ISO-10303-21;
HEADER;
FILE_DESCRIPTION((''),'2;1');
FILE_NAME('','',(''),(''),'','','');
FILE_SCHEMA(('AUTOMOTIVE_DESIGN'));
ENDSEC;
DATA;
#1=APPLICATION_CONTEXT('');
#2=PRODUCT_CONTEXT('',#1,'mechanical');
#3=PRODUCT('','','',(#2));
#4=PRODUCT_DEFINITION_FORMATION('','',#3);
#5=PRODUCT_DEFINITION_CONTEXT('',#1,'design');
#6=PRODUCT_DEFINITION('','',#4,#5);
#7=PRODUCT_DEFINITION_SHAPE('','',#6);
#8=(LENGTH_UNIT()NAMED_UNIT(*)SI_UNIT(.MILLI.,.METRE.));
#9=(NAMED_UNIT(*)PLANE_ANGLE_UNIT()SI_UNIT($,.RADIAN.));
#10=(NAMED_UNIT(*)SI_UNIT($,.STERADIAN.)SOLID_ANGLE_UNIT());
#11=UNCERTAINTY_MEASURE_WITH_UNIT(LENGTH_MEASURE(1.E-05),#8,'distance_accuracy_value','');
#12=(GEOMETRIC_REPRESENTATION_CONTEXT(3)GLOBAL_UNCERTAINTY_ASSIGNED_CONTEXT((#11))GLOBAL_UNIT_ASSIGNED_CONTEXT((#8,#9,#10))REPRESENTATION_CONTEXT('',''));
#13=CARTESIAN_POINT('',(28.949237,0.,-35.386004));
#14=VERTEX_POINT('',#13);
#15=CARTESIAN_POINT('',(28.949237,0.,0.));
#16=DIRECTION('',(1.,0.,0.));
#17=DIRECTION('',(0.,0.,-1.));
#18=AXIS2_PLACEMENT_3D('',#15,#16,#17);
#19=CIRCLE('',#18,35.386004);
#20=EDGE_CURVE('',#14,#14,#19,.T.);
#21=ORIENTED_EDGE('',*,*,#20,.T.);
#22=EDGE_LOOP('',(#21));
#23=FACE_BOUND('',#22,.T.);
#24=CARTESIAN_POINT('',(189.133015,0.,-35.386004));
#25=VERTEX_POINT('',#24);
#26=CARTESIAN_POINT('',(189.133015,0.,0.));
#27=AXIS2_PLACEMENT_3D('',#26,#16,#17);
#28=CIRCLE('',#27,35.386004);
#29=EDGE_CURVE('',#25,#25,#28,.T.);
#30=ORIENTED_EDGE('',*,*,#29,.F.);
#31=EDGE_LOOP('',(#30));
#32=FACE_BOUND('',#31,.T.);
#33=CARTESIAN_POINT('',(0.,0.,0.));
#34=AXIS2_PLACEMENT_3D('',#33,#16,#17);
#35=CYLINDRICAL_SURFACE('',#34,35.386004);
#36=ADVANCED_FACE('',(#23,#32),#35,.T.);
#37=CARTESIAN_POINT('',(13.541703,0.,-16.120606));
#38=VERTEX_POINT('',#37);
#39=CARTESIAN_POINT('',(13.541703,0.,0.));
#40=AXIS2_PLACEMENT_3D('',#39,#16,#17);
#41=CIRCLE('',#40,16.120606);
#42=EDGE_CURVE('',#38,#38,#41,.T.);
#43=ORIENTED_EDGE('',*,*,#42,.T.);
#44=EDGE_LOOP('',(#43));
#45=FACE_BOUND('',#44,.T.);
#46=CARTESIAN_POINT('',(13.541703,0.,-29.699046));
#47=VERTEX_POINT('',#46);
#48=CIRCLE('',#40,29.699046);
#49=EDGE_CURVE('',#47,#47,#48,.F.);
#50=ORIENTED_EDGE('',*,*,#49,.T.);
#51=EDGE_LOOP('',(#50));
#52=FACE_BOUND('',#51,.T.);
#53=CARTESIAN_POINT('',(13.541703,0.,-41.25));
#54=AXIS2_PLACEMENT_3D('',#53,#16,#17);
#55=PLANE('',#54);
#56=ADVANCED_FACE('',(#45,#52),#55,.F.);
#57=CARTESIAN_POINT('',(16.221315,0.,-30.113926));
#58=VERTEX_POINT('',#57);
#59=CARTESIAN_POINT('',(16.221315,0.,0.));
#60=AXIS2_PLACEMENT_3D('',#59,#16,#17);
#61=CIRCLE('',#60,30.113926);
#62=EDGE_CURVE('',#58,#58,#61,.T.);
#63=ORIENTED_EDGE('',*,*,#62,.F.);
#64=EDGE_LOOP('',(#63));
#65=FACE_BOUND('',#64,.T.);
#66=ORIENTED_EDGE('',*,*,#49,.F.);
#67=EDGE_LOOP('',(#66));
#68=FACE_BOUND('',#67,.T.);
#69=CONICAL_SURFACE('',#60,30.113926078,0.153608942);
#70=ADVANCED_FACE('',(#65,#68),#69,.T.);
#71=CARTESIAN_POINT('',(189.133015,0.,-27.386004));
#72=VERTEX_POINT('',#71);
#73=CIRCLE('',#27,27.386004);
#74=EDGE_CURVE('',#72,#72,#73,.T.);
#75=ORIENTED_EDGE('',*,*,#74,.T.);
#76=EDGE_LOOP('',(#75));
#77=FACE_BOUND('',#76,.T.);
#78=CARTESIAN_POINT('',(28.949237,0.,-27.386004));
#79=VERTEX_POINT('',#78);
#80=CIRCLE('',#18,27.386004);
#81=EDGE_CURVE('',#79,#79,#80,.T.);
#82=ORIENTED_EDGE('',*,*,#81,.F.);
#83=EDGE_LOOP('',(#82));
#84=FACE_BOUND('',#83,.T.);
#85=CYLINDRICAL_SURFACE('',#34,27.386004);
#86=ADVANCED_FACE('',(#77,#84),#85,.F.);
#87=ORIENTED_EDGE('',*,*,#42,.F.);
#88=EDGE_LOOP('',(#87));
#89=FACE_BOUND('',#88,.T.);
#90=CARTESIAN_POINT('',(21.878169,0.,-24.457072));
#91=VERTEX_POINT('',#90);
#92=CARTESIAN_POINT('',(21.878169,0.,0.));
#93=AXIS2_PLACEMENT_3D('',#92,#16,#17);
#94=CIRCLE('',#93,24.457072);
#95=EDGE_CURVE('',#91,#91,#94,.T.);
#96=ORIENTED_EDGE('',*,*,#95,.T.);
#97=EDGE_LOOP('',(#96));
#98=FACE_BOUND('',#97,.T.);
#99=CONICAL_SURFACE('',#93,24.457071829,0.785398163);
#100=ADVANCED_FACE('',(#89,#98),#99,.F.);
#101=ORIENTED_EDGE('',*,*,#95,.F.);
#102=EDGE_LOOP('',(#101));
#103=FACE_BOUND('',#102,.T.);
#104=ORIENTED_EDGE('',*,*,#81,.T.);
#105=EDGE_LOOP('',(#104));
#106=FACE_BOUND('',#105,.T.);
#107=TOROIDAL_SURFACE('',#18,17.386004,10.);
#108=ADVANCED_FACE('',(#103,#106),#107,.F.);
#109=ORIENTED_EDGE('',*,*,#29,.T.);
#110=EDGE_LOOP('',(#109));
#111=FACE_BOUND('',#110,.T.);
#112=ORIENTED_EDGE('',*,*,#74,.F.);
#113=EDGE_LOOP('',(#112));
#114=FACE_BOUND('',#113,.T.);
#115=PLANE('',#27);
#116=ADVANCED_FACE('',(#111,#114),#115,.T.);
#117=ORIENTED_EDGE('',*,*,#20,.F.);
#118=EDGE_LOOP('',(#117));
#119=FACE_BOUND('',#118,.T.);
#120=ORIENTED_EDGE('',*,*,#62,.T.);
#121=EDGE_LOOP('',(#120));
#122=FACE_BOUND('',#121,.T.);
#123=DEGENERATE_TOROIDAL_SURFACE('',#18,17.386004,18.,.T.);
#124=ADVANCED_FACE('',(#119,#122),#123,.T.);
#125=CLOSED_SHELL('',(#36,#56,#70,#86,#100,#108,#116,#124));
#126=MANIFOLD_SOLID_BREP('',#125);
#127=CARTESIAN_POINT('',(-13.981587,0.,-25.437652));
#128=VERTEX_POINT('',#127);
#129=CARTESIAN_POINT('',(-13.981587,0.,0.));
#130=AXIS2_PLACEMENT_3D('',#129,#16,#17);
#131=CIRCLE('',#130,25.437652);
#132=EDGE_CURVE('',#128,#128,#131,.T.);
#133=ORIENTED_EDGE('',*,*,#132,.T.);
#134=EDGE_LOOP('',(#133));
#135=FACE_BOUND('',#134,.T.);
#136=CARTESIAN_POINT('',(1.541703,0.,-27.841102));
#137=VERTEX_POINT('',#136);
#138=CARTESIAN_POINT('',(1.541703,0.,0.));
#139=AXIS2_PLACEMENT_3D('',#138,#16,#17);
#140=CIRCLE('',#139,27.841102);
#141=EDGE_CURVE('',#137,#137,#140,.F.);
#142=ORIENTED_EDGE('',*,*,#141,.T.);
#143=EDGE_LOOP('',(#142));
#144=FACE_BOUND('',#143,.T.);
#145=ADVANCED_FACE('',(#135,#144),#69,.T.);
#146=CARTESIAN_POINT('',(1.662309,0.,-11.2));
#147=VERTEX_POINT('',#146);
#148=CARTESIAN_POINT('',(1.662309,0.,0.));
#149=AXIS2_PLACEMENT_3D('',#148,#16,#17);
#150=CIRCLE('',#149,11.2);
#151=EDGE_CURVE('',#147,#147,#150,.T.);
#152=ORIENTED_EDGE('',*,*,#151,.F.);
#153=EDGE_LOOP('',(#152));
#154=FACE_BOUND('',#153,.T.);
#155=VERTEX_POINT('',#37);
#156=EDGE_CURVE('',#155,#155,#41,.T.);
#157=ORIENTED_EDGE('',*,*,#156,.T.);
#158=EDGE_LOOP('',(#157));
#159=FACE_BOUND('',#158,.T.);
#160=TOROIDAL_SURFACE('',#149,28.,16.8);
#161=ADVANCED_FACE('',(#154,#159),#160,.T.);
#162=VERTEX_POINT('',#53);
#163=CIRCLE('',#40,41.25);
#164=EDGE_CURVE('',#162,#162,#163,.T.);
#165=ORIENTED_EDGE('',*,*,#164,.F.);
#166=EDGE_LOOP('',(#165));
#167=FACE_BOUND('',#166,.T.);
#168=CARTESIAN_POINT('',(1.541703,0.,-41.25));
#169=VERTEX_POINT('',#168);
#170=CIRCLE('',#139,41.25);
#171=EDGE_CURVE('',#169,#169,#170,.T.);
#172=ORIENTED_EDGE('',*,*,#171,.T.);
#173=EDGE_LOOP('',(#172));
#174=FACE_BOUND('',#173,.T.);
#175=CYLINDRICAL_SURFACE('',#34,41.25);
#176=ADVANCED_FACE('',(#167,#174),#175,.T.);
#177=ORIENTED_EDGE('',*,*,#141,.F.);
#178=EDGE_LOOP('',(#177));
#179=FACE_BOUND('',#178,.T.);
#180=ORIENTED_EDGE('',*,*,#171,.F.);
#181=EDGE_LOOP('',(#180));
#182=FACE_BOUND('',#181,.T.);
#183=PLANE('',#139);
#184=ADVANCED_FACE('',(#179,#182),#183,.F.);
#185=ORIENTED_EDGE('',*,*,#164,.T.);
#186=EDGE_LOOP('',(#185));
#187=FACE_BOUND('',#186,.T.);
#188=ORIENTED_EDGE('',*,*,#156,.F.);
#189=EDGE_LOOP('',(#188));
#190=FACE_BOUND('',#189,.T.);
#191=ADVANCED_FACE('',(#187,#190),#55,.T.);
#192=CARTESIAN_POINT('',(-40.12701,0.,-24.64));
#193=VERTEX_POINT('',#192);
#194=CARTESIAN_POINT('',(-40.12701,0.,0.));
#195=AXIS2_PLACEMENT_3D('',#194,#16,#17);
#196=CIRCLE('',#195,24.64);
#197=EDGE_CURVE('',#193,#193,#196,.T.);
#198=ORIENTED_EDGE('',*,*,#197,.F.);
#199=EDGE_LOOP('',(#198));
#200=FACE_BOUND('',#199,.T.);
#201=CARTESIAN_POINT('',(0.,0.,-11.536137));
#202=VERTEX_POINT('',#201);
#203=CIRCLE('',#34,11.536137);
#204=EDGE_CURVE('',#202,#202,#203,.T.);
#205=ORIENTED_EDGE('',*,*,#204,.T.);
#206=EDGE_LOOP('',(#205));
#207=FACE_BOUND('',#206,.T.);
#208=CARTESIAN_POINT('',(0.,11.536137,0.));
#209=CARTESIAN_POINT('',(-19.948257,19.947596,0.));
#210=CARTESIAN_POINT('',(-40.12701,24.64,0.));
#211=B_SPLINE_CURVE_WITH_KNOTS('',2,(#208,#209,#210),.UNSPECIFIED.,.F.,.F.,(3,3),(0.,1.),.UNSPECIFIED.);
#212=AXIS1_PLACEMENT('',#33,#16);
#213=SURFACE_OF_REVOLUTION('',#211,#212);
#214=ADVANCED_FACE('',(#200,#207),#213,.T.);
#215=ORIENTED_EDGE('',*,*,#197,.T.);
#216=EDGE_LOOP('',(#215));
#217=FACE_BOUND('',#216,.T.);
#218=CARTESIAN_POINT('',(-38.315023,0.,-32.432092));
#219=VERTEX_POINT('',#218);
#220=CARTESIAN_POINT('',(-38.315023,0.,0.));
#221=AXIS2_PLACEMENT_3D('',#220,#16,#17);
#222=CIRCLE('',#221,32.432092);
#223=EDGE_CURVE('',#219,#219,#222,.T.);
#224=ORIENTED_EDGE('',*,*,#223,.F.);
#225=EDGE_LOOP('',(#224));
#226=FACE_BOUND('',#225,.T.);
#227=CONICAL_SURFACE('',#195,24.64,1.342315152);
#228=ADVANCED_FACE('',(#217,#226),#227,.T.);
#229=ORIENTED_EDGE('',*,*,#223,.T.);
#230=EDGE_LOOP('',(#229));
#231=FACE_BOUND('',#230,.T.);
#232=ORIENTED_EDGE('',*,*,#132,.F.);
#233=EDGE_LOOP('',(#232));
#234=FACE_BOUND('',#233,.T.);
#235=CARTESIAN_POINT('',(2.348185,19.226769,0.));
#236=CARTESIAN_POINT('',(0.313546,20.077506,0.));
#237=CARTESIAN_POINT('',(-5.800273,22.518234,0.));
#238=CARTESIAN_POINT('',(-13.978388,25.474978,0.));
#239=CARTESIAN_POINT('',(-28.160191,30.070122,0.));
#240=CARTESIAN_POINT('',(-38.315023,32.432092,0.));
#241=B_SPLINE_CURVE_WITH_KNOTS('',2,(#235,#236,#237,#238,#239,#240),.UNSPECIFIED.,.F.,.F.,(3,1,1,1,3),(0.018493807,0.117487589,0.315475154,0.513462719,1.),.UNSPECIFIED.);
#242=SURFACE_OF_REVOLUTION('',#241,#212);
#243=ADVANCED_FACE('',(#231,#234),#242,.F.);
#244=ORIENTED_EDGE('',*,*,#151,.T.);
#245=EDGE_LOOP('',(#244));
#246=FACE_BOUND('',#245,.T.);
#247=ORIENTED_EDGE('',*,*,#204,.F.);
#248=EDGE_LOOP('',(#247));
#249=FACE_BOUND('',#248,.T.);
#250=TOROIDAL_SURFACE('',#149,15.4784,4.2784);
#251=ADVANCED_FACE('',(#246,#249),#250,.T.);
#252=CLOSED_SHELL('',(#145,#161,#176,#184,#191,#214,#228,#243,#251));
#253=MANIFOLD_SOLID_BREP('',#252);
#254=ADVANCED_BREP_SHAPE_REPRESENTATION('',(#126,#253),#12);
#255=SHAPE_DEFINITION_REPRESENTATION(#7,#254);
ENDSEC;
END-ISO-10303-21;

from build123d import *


with BuildPart() as part:
    # Sketch1 → Revolve1 (revolve)
    with BuildSketch(Plane.XY):
        with BuildLine():
            Line((28.949236933, 27.386004017), (189.133015331, 27.386004017))
            Line((189.133015331, 27.386004017), (189.133015331, 35.386004017))
            Line((189.133015331, 35.386004017), (28.949236933, 35.386004017))
            ThreePointArc((28.949236933, 35.386004017), (22.060935151, 34.015835602), (16.221314872, 30.113926078))
            Line((16.221314872, 30.113926078), (-13.981586934, 25.437652311))
            add(Edge.make_bspline(
                [(-13.981586934, 25.437652311), (-16.029314719, 26.139512712), (-28.160190772, 30.070121673), (-38.315022829, 32.432092239)],
                knots=[0.414468937, 0.414468937, 0.414468937, 0.513462719, 1, 1, 1], degree=2))
            Line((-38.315022829, 32.432092239), (-40.127010283, 24.64))
            add(Edge.make_bspline(
                [(0, 11.536137468), (-19.948257354, 19.947595697), (-40.127010283, 24.64)],
                knots=[0, 0, 0, 1, 1, 1], degree=2))
            ThreePointArc((0, 11.536137468), (0.81433228, 11.284876268), (1.662309445, 11.2))
            ThreePointArc((1.662309445, 11.2), (8.091391109, 12.478823854), (13.541703369, 16.120606076))
            Line((13.541703369, 16.120606076), (21.878169121, 24.457071829))
            ThreePointArc((21.878169121, 24.457071829), (25.12240261, 26.624799342), (28.949236933, 27.386004017))
        make_face()
    revolve(axis=Axis((0, 0, 0), (-1, 0, 0)))

    # Sketch3 → Revolve2 (revolve)
    with BuildSketch(Plane.XY):
        with BuildLine():
            Line((7.884849119, 21.777460326), (13.541703369, 27.434314575))
            Line((13.541703369, 27.434314575), (13.541703369, 41.25))
            Line((13.541703369, 41.25), (1.541703369, 41.25))
            Line((1.541703369, 41.25), (1.541703369, 19.562467336))
            add(Edge.make_bspline(
                [(2.348184674, 19.226769399), (1.945008818, 19.395347937), (1.541703369, 19.562467336)],
                knots=[0.018493807, 0.018493807, 0.018493807, 0.038110015, 0.038110015, 0.038110015], degree=2))
            ThreePointArc((2.348184674, 19.226769399), (5.344435892, 20.007381854), (7.884849119, 21.777460326))
        make_face()
    revolve(axis=Axis((0, 0, 0), (-1, 0, 0)))


with BuildPart() as body_2:
    # Split1: the piece on the far side of the plane
    add(part.part)
    split(bisect_by=Plane(origin=(13.541703369, 0, 0), x_dir=(0, 0, 1), z_dir=(1, 0, 0)), keep=Keep.BOTTOM)


with BuildPart() as part_1:
    add(part.part)

    # Split1
    split(bisect_by=Plane(origin=(13.541703369, 0, 0), x_dir=(0, 0, 1), z_dir=(1, 0, 0)), keep=Keep.TOP)


solid = Compound([body_2.part, part_1.part])
